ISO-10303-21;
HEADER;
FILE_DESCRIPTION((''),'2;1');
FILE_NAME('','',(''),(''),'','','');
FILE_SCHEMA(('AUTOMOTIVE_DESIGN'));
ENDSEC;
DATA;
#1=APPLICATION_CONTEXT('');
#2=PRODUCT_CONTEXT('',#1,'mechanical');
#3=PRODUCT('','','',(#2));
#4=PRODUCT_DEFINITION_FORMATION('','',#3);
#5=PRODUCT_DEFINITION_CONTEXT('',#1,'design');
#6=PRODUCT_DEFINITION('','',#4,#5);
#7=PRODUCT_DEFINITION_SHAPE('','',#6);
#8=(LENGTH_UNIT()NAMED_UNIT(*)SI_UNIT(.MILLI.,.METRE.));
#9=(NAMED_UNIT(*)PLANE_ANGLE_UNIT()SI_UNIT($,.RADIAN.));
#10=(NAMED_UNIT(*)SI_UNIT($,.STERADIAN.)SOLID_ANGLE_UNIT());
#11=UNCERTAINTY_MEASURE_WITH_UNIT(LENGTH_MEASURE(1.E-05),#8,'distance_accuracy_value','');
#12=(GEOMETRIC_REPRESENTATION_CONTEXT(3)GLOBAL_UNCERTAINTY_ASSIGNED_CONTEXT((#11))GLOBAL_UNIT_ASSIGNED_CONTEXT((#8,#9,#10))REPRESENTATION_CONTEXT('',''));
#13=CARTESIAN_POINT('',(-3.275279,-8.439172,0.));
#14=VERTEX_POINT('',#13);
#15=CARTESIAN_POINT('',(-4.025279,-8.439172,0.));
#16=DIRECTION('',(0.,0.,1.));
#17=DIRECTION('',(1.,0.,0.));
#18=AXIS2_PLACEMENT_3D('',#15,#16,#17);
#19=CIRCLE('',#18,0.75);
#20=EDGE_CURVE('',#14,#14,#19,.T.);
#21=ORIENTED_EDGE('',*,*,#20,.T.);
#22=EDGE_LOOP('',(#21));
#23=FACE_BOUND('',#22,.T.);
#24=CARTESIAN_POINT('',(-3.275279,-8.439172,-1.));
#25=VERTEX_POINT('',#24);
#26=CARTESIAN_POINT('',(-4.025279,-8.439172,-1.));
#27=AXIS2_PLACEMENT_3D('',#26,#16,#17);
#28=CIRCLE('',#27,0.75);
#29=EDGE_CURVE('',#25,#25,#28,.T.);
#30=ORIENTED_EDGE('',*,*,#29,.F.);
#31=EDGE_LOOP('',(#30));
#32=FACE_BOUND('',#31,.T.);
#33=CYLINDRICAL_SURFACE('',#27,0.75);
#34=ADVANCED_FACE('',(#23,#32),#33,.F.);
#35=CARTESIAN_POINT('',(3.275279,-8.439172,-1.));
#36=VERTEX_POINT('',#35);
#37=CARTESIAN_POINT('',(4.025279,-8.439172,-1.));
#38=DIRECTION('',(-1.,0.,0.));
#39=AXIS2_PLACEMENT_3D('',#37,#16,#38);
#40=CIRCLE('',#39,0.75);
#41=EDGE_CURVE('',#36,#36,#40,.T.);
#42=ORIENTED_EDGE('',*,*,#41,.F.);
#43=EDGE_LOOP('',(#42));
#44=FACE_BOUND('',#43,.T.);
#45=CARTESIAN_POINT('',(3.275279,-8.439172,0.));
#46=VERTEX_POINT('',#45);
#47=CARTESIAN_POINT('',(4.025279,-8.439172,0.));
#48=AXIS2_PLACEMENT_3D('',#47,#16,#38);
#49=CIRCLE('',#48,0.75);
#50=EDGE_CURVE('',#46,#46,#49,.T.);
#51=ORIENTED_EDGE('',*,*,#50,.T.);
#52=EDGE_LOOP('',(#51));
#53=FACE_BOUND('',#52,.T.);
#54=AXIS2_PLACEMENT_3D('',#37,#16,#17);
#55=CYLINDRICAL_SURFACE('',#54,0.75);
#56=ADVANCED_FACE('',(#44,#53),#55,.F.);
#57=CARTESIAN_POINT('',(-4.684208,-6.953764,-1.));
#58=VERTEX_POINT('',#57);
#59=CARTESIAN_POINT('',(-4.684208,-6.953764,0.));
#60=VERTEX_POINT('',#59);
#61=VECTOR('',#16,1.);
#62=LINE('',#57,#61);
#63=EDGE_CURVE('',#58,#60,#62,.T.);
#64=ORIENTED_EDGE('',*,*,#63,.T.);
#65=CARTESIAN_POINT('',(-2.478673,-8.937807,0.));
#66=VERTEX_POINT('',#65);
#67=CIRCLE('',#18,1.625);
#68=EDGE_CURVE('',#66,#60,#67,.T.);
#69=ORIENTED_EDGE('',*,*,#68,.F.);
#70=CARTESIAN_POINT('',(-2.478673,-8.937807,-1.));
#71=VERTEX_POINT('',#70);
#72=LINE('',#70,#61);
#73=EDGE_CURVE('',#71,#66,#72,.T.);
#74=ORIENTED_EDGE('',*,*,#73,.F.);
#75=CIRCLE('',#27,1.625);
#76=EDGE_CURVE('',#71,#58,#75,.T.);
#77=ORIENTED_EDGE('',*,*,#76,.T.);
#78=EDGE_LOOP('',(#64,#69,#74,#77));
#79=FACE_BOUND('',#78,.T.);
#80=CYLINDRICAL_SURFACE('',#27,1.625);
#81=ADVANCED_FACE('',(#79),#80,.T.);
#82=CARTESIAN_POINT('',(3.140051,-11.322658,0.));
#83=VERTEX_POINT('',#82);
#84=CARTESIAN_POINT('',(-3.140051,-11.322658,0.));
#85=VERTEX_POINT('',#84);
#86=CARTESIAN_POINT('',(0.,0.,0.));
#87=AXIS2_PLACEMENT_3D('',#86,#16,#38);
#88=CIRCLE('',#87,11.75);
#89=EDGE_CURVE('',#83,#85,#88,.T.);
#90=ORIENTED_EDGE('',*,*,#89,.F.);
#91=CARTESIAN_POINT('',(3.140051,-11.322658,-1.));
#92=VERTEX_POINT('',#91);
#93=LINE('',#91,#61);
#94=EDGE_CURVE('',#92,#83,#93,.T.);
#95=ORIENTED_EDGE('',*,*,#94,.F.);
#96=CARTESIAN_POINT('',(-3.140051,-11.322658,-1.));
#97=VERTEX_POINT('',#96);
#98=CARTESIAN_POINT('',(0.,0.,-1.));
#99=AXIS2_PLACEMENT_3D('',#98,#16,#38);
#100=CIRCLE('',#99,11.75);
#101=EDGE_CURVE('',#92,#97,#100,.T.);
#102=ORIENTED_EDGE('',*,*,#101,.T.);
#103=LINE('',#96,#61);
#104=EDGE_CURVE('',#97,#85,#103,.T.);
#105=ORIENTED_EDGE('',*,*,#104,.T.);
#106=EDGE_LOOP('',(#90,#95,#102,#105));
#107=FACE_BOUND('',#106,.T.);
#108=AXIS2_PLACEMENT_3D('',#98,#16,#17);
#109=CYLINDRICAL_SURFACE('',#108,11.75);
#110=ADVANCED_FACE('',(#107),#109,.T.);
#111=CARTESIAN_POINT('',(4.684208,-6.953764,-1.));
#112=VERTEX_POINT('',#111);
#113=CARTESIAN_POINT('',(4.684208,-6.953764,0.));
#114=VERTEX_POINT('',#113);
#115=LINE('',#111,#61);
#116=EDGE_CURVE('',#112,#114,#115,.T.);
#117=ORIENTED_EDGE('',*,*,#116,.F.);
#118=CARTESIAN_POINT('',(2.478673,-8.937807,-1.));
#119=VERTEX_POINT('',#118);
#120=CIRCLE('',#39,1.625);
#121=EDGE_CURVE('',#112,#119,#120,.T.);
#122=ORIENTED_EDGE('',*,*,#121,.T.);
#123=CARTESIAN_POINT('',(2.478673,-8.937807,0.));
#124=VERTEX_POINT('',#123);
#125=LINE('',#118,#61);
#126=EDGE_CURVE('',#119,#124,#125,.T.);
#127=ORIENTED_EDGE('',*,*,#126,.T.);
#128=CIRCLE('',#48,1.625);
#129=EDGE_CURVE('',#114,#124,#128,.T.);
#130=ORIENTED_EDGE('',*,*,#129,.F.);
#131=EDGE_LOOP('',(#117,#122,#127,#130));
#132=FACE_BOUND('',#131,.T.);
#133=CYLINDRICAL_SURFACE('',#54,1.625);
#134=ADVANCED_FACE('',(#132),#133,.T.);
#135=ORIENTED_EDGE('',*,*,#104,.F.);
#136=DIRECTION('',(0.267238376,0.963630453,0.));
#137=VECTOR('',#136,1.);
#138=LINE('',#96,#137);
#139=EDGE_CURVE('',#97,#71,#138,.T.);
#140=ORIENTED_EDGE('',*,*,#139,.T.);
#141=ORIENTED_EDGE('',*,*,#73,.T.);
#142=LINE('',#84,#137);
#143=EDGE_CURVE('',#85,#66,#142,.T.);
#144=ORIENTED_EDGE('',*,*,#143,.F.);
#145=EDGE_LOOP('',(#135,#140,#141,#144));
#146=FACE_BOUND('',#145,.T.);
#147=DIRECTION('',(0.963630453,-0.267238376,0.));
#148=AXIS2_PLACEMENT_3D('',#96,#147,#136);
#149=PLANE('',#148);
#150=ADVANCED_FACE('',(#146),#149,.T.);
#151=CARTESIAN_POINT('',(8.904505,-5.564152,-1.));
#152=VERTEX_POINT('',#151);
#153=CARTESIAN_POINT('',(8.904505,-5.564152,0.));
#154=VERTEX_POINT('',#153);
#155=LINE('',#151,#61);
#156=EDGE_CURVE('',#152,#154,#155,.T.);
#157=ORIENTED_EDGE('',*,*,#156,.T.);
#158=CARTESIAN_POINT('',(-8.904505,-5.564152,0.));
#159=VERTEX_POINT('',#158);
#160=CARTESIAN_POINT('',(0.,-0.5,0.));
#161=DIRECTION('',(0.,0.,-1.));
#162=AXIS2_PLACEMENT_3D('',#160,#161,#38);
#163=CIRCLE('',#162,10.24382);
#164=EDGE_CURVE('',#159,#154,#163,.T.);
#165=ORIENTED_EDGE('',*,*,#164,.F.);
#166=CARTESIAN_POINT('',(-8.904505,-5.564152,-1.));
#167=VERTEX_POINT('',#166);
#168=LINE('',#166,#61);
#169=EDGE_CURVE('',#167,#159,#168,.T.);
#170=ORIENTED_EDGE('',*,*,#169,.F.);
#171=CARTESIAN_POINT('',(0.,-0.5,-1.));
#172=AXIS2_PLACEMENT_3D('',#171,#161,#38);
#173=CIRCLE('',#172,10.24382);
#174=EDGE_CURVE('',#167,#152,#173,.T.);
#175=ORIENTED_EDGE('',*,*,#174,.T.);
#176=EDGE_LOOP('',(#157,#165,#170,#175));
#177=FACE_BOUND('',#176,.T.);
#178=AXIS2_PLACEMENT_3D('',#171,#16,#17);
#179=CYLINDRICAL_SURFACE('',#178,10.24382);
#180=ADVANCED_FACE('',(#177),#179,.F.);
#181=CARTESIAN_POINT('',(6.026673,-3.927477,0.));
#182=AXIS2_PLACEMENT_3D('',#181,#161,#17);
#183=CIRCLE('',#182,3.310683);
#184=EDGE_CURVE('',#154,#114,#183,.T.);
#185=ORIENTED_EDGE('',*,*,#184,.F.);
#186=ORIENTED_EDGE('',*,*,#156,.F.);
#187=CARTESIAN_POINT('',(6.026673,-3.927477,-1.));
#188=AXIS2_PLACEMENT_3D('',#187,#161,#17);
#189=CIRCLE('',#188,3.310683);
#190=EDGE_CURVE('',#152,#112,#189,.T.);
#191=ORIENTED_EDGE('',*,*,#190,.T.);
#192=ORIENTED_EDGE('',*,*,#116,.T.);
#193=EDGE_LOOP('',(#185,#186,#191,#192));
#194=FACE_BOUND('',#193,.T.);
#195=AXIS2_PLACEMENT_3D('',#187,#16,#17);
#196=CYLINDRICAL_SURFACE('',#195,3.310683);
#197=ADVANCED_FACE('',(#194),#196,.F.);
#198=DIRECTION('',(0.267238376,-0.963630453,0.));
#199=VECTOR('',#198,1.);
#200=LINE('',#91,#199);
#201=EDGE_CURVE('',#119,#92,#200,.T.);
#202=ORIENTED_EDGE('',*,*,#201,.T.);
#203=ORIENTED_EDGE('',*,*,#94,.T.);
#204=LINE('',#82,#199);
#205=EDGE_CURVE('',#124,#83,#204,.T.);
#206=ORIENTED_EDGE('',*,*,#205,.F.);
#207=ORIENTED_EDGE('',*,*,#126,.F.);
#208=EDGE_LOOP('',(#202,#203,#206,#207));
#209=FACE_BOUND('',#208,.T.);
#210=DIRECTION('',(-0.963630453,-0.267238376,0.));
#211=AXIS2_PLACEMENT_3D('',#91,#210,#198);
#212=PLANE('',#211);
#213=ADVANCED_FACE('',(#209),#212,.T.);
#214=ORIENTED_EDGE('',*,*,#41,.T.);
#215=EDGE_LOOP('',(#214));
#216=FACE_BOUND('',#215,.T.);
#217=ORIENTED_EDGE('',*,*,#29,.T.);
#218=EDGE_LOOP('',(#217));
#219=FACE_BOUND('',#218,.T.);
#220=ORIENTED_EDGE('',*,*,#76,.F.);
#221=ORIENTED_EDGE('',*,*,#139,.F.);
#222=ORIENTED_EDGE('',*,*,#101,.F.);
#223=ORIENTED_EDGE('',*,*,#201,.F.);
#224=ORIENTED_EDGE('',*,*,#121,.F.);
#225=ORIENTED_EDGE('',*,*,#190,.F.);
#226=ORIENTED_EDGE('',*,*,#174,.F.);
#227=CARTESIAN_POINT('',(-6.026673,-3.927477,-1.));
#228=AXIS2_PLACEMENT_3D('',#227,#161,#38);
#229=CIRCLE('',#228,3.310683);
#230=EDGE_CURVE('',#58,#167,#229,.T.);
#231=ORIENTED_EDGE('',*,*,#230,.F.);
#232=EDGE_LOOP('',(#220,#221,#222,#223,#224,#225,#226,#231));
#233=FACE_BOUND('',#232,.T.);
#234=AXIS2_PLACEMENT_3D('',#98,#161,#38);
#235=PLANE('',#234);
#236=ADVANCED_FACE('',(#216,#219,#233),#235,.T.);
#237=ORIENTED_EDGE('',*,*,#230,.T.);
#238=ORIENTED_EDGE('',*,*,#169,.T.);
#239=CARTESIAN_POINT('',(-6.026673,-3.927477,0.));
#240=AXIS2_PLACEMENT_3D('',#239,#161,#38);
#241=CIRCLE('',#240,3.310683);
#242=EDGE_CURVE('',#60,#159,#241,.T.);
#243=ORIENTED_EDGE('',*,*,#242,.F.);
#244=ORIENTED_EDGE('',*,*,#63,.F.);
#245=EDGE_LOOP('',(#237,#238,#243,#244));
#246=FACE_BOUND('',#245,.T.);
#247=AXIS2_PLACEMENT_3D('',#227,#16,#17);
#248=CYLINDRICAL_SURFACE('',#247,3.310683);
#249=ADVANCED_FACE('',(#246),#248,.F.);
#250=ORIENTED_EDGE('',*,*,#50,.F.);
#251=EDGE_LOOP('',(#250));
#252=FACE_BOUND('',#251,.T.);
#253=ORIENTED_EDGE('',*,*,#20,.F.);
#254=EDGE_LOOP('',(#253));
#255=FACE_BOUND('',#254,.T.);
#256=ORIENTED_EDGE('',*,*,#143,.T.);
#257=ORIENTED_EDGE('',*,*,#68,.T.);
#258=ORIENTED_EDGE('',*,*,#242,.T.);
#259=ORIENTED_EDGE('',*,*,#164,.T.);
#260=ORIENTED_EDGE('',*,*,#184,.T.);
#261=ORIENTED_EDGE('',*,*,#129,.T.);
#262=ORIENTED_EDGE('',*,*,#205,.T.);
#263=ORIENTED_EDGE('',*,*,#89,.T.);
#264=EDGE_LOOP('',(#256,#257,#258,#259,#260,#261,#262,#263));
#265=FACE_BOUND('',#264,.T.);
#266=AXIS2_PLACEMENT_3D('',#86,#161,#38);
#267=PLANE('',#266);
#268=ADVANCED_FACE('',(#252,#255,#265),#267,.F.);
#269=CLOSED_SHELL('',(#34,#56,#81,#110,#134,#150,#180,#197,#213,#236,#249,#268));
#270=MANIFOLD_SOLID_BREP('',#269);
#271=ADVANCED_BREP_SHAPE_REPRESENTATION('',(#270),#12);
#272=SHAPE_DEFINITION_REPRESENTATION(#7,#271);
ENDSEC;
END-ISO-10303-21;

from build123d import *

# Parameters (mm, degrees)
SKETCH1_R          = 0.75
BASE_FLANGE1_DEPTH = 1


# Sheet-metal steps are written as plain solids
with BuildPart() as part:
    # Sketch1 → Base-Flange1 (new body)
    with BuildSketch(Plane.XY):
        with BuildLine():
            Line((-3.140050919, -11.322657825), (-2.47867317, -8.937806709))
            ThreePointArc((-2.47867317, -8.937806709), (-2.938495148, -7.231063808), (-4.684207754, -6.95376419))
            ThreePointArc((-4.684207754, -6.95376419), (-7.062092174, -7.07208067), (-8.90450501, -5.564152274))
            ThreePointArc((-8.90450501, -5.564152274), (0, 9.743819977), (8.90450501, -5.564152274))
            ThreePointArc((8.90450501, -5.564152274), (7.062092174, -7.07208067), (4.684207754, -6.95376419))
            ThreePointArc((4.684207754, -6.95376419), (2.938495148, -7.231063808), (2.47867317, -8.937806709))
            Line((2.47867317, -8.937806709), (3.140050919, -11.322657825))
            ThreePointArc((3.140050919, -11.322657825), (0, 11.75), (-3.140050919, -11.322657825))
        make_face()
        with Locations((-4.025278755, -8.439172409)):
            Circle(SKETCH1_R, mode=Mode.SUBTRACT)
        with Locations(Location((4.025278755, -8.439172409, 0), (0, 0, 180))):
            Circle(SKETCH1_R, mode=Mode.SUBTRACT)
    extrude(amount=-BASE_FLANGE1_DEPTH)


solid = part.part
